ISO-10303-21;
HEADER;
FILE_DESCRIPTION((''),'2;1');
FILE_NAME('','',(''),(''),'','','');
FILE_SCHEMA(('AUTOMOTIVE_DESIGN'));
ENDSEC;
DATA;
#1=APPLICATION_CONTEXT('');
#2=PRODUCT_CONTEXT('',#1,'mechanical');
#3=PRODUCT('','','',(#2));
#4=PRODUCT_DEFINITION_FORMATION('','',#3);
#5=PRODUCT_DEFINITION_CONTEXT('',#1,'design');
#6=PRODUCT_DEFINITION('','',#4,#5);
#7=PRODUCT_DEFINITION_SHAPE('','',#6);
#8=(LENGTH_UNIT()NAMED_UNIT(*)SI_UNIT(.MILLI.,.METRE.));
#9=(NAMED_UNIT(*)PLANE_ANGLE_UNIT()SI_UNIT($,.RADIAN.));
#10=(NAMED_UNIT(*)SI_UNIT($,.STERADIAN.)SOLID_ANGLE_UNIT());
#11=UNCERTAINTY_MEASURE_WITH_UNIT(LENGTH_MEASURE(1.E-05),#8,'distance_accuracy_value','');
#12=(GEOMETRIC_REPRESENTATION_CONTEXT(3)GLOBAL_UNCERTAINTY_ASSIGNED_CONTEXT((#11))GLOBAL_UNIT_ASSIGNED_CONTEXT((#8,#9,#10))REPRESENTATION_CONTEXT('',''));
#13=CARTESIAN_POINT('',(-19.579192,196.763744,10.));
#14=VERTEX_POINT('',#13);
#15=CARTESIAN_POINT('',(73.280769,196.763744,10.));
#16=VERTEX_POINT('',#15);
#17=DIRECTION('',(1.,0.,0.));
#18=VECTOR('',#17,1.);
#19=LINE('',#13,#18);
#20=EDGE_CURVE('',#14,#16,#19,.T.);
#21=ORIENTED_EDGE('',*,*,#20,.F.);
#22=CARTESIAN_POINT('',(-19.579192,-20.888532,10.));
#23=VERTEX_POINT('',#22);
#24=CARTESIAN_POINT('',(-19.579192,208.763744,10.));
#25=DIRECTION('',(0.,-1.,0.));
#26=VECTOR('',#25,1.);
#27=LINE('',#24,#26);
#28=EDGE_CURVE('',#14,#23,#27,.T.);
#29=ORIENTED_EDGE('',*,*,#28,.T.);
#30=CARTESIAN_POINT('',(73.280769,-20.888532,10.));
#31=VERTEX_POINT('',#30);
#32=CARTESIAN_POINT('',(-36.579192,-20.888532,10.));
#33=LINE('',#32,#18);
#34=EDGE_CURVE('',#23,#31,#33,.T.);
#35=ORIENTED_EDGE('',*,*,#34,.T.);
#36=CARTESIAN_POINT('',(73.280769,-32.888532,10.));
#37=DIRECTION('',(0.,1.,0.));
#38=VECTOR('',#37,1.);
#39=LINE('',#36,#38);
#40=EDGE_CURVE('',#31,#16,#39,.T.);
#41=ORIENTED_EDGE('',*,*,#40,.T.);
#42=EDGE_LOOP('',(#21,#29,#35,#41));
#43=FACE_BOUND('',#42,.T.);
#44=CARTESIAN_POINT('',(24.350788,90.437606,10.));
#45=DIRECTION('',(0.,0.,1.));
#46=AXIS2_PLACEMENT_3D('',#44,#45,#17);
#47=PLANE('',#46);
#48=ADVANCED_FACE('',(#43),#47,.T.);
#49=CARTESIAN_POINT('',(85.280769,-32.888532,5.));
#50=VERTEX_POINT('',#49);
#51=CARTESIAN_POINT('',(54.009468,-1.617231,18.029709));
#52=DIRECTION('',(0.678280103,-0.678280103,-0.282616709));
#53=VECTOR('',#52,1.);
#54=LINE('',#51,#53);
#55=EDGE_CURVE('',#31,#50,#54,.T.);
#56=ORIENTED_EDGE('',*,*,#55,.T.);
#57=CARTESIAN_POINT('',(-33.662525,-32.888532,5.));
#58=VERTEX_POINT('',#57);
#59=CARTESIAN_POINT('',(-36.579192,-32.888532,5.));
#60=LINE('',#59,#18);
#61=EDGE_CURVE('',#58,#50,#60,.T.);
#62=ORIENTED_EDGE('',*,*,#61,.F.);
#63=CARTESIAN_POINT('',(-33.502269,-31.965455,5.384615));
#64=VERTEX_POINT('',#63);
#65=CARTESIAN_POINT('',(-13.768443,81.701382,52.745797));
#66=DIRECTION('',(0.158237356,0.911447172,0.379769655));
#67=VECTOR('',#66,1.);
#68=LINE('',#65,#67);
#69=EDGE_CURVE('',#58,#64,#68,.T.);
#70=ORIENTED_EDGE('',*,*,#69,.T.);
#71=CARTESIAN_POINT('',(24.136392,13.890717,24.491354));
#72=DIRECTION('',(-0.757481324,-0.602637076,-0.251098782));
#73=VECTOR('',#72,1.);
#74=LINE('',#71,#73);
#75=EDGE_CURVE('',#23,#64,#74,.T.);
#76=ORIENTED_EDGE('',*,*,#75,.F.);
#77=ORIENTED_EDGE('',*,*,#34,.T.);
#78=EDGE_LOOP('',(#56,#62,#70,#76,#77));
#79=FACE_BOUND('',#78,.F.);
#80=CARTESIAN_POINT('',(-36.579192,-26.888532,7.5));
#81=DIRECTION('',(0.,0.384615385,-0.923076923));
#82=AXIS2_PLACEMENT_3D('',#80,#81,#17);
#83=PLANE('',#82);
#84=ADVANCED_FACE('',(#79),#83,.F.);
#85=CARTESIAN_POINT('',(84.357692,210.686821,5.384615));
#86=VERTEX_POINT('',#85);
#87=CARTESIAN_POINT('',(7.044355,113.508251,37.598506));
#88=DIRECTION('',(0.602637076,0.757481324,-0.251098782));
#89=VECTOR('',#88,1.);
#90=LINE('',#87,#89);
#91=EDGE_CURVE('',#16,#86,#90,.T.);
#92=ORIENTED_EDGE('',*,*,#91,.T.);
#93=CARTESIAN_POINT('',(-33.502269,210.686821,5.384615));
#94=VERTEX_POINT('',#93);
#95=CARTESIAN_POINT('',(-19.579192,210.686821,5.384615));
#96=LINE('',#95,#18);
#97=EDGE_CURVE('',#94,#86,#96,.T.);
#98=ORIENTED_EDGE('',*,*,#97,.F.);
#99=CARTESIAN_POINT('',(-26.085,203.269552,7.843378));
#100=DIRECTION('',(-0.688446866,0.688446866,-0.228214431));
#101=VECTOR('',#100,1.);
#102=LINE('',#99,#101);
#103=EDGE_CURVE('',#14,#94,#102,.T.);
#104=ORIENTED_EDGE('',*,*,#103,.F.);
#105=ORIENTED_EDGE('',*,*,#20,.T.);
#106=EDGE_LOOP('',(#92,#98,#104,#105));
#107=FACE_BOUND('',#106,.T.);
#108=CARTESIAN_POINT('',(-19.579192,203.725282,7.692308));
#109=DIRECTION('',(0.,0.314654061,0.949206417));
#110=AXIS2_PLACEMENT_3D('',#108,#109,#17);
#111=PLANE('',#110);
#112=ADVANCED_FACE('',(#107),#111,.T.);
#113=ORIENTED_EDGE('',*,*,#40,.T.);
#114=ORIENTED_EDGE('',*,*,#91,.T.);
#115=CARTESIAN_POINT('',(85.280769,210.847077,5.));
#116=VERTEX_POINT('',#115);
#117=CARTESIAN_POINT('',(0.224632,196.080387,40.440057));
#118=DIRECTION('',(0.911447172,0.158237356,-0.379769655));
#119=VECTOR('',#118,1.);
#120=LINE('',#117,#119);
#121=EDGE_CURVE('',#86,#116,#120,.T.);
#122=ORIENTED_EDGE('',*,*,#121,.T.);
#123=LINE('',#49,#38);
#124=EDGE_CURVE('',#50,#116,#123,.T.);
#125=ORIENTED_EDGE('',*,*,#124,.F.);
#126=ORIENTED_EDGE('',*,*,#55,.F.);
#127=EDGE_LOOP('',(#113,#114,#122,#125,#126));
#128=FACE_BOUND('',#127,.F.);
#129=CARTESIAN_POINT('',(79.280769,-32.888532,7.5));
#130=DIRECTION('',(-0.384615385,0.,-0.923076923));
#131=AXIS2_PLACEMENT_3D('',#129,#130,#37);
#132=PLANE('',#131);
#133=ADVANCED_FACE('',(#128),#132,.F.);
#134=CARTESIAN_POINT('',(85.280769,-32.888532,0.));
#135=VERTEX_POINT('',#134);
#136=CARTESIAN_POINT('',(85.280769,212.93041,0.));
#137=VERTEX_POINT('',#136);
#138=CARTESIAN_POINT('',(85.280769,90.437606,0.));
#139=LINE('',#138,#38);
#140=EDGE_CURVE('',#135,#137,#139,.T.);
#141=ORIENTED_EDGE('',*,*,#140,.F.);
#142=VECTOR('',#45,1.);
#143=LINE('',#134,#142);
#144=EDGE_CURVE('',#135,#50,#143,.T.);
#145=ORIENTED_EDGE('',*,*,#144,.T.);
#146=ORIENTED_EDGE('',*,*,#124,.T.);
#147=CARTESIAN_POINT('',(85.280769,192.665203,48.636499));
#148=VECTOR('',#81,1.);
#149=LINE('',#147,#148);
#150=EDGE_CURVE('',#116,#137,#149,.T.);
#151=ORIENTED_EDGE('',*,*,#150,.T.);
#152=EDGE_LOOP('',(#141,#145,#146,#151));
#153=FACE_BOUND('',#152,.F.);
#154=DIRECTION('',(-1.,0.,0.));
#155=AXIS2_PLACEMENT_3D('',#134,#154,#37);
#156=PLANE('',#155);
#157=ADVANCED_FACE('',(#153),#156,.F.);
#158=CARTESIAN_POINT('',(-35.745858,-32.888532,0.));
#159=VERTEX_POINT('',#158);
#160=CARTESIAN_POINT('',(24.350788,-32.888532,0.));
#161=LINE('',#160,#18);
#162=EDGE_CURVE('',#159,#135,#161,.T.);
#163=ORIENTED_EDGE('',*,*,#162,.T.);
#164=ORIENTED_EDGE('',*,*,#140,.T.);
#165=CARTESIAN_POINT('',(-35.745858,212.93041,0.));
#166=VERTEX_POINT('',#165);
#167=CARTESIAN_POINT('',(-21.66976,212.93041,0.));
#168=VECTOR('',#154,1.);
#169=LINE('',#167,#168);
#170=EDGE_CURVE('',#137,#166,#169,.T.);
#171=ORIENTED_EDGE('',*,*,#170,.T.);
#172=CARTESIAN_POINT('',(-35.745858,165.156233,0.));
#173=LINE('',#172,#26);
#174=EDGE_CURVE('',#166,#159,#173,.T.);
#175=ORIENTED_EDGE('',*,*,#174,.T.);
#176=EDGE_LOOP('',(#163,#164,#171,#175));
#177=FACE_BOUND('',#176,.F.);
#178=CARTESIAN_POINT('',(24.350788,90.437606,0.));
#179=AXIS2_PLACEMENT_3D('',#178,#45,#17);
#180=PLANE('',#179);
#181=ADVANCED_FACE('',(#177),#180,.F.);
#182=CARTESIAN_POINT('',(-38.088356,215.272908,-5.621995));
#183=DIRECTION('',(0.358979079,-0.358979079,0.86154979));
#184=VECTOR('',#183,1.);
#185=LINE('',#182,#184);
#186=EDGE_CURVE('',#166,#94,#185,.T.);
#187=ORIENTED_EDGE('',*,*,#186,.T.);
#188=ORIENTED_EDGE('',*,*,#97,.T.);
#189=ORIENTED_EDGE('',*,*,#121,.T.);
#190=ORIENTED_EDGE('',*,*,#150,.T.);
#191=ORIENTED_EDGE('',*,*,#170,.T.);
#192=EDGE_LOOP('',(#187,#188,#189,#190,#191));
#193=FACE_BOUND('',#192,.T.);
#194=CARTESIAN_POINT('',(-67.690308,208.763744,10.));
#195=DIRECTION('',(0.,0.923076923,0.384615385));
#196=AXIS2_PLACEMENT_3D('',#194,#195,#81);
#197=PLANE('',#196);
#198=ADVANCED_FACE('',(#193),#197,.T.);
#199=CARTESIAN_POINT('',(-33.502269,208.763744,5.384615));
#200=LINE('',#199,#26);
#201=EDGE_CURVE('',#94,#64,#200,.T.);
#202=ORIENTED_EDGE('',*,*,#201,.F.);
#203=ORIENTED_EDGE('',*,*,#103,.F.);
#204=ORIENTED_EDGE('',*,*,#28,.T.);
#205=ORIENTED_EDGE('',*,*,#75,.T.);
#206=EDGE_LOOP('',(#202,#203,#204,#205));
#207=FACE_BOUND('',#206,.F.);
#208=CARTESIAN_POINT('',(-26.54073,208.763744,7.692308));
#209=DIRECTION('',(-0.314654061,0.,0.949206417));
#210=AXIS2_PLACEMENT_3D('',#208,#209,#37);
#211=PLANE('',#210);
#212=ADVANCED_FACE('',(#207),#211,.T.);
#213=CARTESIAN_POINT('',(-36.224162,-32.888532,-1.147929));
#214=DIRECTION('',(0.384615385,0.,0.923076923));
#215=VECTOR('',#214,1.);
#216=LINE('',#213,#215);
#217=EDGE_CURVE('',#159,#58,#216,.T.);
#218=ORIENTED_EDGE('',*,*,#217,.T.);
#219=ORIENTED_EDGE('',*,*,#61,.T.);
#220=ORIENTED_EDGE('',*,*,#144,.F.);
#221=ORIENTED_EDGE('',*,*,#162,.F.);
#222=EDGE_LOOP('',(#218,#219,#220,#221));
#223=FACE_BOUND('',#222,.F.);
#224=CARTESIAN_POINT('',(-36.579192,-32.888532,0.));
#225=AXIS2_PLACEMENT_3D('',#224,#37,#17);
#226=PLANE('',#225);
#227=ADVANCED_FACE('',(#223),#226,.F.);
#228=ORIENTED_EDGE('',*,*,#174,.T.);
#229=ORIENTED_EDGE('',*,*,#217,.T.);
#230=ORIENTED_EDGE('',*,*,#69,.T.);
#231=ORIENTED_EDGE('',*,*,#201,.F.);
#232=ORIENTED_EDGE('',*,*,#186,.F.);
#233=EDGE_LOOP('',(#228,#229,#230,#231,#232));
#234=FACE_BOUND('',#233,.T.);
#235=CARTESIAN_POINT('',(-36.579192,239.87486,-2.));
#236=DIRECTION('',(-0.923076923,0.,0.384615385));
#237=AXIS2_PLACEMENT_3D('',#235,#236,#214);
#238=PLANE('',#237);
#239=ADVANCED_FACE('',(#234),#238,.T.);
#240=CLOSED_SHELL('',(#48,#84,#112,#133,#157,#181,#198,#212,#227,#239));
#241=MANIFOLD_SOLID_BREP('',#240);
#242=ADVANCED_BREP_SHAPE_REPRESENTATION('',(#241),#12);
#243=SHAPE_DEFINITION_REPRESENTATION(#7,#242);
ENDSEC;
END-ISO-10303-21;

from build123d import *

# Parameters (mm, degrees)
F0_W        = 121.859960258
F0_H        = 246.6522753239
F1_DEPTH    = 10
F2_SIZE2    = 5
F2_SIZE     = 12
F3_SIZE2    = 5
F3_SIZE     = 12
F4_T1_DEPTH = 172.0821922482
F5_T1_DEPTH = 291.8745073141
F6_SIZE2    = 5
F6_SIZE     = 12
F7_SIZE2    = 5
F7_SIZE     = 12


# Not quite as in the source:
# - a fillet or chamfer that OpenCascade refuses, or shapes differently, is made with other operations: its cross-section is extruded or revolved along the edge and cut away or added


with BuildPart() as f1:
    # F0 (on Top) → F1 (new body)
    with BuildSketch(Plane.XY):
        with Locations((24.3507884443, 90.4376059771)):
            Rectangle(F0_W, F0_H)
    extrude(amount=F1_DEPTH)

    # F2
    f2_edges = [f1.edges().sort_by_distance(p)[0] for p in [
        (85.280769, 90.437606, 10),
    ]]
    f2_side = f1.faces().sort_by_distance((24.350788, 90.437606, 10))[0]
    chamfer(f2_edges, length=F2_SIZE, length2=F2_SIZE2, reference=f2_side)

    # F3
    f3_edges = [f1.edges().sort_by_distance(p)[0] for p in [
        (18.350788, -32.888532, 10),
    ]]
    f3_side = f1.faces().sort_by_distance((18.350788, 90.437606, 10))[0]
    chamfer(f3_edges, length=F3_SIZE, length2=F3_SIZE2, reference=f3_side)

    # F4: chamfer of 12 x 5 on 1 edges, made by hand

    # F4_s2 → F4_t1 (cut)
    with BuildSketch(Plane.YZ.offset(-67.6903076798)):
        Polygon((208.763743639, 10), (213.763743639, -2), (213.763743639, 10), align=None)
    extrude(amount=F4_T1_DEPTH, mode=Mode.SUBTRACT)

    # F5: chamfer of 12 x 5 on 1 edges, made by hand

    # F5_s2 → F5_t1 (cut)
    with BuildSketch(Plane.XZ.offset(-239.8748596341)):
        Polygon((-36.5791916847, -2), (-31.5791916847, 10), (-36.5791916847, 10), align=None)
    extrude(amount=F5_T1_DEPTH, mode=Mode.SUBTRACT)

    # F6
    f6_edges = [f1.edges().sort_by_distance(p)[0] for p in [
        (-31.579192, 93.937606, 10),
    ]]
    f6_side = f1.faces().sort_by_distance((20.850788, 93.937606, 10))[0]
    chamfer(f6_edges, length=F6_SIZE, length2=F6_SIZE2, reference=f6_side)

    # F7
    f7_edges = [f1.edges().sort_by_distance(p)[0] for p in [
        (26.850788, 208.763744, 10),
    ]]
    f7_side = f1.faces().sort_by_distance((26.850788, 93.937606, 10))[0]
    chamfer(f7_edges, length=F7_SIZE, length2=F7_SIZE2, reference=f7_side)


solid = f1.part
